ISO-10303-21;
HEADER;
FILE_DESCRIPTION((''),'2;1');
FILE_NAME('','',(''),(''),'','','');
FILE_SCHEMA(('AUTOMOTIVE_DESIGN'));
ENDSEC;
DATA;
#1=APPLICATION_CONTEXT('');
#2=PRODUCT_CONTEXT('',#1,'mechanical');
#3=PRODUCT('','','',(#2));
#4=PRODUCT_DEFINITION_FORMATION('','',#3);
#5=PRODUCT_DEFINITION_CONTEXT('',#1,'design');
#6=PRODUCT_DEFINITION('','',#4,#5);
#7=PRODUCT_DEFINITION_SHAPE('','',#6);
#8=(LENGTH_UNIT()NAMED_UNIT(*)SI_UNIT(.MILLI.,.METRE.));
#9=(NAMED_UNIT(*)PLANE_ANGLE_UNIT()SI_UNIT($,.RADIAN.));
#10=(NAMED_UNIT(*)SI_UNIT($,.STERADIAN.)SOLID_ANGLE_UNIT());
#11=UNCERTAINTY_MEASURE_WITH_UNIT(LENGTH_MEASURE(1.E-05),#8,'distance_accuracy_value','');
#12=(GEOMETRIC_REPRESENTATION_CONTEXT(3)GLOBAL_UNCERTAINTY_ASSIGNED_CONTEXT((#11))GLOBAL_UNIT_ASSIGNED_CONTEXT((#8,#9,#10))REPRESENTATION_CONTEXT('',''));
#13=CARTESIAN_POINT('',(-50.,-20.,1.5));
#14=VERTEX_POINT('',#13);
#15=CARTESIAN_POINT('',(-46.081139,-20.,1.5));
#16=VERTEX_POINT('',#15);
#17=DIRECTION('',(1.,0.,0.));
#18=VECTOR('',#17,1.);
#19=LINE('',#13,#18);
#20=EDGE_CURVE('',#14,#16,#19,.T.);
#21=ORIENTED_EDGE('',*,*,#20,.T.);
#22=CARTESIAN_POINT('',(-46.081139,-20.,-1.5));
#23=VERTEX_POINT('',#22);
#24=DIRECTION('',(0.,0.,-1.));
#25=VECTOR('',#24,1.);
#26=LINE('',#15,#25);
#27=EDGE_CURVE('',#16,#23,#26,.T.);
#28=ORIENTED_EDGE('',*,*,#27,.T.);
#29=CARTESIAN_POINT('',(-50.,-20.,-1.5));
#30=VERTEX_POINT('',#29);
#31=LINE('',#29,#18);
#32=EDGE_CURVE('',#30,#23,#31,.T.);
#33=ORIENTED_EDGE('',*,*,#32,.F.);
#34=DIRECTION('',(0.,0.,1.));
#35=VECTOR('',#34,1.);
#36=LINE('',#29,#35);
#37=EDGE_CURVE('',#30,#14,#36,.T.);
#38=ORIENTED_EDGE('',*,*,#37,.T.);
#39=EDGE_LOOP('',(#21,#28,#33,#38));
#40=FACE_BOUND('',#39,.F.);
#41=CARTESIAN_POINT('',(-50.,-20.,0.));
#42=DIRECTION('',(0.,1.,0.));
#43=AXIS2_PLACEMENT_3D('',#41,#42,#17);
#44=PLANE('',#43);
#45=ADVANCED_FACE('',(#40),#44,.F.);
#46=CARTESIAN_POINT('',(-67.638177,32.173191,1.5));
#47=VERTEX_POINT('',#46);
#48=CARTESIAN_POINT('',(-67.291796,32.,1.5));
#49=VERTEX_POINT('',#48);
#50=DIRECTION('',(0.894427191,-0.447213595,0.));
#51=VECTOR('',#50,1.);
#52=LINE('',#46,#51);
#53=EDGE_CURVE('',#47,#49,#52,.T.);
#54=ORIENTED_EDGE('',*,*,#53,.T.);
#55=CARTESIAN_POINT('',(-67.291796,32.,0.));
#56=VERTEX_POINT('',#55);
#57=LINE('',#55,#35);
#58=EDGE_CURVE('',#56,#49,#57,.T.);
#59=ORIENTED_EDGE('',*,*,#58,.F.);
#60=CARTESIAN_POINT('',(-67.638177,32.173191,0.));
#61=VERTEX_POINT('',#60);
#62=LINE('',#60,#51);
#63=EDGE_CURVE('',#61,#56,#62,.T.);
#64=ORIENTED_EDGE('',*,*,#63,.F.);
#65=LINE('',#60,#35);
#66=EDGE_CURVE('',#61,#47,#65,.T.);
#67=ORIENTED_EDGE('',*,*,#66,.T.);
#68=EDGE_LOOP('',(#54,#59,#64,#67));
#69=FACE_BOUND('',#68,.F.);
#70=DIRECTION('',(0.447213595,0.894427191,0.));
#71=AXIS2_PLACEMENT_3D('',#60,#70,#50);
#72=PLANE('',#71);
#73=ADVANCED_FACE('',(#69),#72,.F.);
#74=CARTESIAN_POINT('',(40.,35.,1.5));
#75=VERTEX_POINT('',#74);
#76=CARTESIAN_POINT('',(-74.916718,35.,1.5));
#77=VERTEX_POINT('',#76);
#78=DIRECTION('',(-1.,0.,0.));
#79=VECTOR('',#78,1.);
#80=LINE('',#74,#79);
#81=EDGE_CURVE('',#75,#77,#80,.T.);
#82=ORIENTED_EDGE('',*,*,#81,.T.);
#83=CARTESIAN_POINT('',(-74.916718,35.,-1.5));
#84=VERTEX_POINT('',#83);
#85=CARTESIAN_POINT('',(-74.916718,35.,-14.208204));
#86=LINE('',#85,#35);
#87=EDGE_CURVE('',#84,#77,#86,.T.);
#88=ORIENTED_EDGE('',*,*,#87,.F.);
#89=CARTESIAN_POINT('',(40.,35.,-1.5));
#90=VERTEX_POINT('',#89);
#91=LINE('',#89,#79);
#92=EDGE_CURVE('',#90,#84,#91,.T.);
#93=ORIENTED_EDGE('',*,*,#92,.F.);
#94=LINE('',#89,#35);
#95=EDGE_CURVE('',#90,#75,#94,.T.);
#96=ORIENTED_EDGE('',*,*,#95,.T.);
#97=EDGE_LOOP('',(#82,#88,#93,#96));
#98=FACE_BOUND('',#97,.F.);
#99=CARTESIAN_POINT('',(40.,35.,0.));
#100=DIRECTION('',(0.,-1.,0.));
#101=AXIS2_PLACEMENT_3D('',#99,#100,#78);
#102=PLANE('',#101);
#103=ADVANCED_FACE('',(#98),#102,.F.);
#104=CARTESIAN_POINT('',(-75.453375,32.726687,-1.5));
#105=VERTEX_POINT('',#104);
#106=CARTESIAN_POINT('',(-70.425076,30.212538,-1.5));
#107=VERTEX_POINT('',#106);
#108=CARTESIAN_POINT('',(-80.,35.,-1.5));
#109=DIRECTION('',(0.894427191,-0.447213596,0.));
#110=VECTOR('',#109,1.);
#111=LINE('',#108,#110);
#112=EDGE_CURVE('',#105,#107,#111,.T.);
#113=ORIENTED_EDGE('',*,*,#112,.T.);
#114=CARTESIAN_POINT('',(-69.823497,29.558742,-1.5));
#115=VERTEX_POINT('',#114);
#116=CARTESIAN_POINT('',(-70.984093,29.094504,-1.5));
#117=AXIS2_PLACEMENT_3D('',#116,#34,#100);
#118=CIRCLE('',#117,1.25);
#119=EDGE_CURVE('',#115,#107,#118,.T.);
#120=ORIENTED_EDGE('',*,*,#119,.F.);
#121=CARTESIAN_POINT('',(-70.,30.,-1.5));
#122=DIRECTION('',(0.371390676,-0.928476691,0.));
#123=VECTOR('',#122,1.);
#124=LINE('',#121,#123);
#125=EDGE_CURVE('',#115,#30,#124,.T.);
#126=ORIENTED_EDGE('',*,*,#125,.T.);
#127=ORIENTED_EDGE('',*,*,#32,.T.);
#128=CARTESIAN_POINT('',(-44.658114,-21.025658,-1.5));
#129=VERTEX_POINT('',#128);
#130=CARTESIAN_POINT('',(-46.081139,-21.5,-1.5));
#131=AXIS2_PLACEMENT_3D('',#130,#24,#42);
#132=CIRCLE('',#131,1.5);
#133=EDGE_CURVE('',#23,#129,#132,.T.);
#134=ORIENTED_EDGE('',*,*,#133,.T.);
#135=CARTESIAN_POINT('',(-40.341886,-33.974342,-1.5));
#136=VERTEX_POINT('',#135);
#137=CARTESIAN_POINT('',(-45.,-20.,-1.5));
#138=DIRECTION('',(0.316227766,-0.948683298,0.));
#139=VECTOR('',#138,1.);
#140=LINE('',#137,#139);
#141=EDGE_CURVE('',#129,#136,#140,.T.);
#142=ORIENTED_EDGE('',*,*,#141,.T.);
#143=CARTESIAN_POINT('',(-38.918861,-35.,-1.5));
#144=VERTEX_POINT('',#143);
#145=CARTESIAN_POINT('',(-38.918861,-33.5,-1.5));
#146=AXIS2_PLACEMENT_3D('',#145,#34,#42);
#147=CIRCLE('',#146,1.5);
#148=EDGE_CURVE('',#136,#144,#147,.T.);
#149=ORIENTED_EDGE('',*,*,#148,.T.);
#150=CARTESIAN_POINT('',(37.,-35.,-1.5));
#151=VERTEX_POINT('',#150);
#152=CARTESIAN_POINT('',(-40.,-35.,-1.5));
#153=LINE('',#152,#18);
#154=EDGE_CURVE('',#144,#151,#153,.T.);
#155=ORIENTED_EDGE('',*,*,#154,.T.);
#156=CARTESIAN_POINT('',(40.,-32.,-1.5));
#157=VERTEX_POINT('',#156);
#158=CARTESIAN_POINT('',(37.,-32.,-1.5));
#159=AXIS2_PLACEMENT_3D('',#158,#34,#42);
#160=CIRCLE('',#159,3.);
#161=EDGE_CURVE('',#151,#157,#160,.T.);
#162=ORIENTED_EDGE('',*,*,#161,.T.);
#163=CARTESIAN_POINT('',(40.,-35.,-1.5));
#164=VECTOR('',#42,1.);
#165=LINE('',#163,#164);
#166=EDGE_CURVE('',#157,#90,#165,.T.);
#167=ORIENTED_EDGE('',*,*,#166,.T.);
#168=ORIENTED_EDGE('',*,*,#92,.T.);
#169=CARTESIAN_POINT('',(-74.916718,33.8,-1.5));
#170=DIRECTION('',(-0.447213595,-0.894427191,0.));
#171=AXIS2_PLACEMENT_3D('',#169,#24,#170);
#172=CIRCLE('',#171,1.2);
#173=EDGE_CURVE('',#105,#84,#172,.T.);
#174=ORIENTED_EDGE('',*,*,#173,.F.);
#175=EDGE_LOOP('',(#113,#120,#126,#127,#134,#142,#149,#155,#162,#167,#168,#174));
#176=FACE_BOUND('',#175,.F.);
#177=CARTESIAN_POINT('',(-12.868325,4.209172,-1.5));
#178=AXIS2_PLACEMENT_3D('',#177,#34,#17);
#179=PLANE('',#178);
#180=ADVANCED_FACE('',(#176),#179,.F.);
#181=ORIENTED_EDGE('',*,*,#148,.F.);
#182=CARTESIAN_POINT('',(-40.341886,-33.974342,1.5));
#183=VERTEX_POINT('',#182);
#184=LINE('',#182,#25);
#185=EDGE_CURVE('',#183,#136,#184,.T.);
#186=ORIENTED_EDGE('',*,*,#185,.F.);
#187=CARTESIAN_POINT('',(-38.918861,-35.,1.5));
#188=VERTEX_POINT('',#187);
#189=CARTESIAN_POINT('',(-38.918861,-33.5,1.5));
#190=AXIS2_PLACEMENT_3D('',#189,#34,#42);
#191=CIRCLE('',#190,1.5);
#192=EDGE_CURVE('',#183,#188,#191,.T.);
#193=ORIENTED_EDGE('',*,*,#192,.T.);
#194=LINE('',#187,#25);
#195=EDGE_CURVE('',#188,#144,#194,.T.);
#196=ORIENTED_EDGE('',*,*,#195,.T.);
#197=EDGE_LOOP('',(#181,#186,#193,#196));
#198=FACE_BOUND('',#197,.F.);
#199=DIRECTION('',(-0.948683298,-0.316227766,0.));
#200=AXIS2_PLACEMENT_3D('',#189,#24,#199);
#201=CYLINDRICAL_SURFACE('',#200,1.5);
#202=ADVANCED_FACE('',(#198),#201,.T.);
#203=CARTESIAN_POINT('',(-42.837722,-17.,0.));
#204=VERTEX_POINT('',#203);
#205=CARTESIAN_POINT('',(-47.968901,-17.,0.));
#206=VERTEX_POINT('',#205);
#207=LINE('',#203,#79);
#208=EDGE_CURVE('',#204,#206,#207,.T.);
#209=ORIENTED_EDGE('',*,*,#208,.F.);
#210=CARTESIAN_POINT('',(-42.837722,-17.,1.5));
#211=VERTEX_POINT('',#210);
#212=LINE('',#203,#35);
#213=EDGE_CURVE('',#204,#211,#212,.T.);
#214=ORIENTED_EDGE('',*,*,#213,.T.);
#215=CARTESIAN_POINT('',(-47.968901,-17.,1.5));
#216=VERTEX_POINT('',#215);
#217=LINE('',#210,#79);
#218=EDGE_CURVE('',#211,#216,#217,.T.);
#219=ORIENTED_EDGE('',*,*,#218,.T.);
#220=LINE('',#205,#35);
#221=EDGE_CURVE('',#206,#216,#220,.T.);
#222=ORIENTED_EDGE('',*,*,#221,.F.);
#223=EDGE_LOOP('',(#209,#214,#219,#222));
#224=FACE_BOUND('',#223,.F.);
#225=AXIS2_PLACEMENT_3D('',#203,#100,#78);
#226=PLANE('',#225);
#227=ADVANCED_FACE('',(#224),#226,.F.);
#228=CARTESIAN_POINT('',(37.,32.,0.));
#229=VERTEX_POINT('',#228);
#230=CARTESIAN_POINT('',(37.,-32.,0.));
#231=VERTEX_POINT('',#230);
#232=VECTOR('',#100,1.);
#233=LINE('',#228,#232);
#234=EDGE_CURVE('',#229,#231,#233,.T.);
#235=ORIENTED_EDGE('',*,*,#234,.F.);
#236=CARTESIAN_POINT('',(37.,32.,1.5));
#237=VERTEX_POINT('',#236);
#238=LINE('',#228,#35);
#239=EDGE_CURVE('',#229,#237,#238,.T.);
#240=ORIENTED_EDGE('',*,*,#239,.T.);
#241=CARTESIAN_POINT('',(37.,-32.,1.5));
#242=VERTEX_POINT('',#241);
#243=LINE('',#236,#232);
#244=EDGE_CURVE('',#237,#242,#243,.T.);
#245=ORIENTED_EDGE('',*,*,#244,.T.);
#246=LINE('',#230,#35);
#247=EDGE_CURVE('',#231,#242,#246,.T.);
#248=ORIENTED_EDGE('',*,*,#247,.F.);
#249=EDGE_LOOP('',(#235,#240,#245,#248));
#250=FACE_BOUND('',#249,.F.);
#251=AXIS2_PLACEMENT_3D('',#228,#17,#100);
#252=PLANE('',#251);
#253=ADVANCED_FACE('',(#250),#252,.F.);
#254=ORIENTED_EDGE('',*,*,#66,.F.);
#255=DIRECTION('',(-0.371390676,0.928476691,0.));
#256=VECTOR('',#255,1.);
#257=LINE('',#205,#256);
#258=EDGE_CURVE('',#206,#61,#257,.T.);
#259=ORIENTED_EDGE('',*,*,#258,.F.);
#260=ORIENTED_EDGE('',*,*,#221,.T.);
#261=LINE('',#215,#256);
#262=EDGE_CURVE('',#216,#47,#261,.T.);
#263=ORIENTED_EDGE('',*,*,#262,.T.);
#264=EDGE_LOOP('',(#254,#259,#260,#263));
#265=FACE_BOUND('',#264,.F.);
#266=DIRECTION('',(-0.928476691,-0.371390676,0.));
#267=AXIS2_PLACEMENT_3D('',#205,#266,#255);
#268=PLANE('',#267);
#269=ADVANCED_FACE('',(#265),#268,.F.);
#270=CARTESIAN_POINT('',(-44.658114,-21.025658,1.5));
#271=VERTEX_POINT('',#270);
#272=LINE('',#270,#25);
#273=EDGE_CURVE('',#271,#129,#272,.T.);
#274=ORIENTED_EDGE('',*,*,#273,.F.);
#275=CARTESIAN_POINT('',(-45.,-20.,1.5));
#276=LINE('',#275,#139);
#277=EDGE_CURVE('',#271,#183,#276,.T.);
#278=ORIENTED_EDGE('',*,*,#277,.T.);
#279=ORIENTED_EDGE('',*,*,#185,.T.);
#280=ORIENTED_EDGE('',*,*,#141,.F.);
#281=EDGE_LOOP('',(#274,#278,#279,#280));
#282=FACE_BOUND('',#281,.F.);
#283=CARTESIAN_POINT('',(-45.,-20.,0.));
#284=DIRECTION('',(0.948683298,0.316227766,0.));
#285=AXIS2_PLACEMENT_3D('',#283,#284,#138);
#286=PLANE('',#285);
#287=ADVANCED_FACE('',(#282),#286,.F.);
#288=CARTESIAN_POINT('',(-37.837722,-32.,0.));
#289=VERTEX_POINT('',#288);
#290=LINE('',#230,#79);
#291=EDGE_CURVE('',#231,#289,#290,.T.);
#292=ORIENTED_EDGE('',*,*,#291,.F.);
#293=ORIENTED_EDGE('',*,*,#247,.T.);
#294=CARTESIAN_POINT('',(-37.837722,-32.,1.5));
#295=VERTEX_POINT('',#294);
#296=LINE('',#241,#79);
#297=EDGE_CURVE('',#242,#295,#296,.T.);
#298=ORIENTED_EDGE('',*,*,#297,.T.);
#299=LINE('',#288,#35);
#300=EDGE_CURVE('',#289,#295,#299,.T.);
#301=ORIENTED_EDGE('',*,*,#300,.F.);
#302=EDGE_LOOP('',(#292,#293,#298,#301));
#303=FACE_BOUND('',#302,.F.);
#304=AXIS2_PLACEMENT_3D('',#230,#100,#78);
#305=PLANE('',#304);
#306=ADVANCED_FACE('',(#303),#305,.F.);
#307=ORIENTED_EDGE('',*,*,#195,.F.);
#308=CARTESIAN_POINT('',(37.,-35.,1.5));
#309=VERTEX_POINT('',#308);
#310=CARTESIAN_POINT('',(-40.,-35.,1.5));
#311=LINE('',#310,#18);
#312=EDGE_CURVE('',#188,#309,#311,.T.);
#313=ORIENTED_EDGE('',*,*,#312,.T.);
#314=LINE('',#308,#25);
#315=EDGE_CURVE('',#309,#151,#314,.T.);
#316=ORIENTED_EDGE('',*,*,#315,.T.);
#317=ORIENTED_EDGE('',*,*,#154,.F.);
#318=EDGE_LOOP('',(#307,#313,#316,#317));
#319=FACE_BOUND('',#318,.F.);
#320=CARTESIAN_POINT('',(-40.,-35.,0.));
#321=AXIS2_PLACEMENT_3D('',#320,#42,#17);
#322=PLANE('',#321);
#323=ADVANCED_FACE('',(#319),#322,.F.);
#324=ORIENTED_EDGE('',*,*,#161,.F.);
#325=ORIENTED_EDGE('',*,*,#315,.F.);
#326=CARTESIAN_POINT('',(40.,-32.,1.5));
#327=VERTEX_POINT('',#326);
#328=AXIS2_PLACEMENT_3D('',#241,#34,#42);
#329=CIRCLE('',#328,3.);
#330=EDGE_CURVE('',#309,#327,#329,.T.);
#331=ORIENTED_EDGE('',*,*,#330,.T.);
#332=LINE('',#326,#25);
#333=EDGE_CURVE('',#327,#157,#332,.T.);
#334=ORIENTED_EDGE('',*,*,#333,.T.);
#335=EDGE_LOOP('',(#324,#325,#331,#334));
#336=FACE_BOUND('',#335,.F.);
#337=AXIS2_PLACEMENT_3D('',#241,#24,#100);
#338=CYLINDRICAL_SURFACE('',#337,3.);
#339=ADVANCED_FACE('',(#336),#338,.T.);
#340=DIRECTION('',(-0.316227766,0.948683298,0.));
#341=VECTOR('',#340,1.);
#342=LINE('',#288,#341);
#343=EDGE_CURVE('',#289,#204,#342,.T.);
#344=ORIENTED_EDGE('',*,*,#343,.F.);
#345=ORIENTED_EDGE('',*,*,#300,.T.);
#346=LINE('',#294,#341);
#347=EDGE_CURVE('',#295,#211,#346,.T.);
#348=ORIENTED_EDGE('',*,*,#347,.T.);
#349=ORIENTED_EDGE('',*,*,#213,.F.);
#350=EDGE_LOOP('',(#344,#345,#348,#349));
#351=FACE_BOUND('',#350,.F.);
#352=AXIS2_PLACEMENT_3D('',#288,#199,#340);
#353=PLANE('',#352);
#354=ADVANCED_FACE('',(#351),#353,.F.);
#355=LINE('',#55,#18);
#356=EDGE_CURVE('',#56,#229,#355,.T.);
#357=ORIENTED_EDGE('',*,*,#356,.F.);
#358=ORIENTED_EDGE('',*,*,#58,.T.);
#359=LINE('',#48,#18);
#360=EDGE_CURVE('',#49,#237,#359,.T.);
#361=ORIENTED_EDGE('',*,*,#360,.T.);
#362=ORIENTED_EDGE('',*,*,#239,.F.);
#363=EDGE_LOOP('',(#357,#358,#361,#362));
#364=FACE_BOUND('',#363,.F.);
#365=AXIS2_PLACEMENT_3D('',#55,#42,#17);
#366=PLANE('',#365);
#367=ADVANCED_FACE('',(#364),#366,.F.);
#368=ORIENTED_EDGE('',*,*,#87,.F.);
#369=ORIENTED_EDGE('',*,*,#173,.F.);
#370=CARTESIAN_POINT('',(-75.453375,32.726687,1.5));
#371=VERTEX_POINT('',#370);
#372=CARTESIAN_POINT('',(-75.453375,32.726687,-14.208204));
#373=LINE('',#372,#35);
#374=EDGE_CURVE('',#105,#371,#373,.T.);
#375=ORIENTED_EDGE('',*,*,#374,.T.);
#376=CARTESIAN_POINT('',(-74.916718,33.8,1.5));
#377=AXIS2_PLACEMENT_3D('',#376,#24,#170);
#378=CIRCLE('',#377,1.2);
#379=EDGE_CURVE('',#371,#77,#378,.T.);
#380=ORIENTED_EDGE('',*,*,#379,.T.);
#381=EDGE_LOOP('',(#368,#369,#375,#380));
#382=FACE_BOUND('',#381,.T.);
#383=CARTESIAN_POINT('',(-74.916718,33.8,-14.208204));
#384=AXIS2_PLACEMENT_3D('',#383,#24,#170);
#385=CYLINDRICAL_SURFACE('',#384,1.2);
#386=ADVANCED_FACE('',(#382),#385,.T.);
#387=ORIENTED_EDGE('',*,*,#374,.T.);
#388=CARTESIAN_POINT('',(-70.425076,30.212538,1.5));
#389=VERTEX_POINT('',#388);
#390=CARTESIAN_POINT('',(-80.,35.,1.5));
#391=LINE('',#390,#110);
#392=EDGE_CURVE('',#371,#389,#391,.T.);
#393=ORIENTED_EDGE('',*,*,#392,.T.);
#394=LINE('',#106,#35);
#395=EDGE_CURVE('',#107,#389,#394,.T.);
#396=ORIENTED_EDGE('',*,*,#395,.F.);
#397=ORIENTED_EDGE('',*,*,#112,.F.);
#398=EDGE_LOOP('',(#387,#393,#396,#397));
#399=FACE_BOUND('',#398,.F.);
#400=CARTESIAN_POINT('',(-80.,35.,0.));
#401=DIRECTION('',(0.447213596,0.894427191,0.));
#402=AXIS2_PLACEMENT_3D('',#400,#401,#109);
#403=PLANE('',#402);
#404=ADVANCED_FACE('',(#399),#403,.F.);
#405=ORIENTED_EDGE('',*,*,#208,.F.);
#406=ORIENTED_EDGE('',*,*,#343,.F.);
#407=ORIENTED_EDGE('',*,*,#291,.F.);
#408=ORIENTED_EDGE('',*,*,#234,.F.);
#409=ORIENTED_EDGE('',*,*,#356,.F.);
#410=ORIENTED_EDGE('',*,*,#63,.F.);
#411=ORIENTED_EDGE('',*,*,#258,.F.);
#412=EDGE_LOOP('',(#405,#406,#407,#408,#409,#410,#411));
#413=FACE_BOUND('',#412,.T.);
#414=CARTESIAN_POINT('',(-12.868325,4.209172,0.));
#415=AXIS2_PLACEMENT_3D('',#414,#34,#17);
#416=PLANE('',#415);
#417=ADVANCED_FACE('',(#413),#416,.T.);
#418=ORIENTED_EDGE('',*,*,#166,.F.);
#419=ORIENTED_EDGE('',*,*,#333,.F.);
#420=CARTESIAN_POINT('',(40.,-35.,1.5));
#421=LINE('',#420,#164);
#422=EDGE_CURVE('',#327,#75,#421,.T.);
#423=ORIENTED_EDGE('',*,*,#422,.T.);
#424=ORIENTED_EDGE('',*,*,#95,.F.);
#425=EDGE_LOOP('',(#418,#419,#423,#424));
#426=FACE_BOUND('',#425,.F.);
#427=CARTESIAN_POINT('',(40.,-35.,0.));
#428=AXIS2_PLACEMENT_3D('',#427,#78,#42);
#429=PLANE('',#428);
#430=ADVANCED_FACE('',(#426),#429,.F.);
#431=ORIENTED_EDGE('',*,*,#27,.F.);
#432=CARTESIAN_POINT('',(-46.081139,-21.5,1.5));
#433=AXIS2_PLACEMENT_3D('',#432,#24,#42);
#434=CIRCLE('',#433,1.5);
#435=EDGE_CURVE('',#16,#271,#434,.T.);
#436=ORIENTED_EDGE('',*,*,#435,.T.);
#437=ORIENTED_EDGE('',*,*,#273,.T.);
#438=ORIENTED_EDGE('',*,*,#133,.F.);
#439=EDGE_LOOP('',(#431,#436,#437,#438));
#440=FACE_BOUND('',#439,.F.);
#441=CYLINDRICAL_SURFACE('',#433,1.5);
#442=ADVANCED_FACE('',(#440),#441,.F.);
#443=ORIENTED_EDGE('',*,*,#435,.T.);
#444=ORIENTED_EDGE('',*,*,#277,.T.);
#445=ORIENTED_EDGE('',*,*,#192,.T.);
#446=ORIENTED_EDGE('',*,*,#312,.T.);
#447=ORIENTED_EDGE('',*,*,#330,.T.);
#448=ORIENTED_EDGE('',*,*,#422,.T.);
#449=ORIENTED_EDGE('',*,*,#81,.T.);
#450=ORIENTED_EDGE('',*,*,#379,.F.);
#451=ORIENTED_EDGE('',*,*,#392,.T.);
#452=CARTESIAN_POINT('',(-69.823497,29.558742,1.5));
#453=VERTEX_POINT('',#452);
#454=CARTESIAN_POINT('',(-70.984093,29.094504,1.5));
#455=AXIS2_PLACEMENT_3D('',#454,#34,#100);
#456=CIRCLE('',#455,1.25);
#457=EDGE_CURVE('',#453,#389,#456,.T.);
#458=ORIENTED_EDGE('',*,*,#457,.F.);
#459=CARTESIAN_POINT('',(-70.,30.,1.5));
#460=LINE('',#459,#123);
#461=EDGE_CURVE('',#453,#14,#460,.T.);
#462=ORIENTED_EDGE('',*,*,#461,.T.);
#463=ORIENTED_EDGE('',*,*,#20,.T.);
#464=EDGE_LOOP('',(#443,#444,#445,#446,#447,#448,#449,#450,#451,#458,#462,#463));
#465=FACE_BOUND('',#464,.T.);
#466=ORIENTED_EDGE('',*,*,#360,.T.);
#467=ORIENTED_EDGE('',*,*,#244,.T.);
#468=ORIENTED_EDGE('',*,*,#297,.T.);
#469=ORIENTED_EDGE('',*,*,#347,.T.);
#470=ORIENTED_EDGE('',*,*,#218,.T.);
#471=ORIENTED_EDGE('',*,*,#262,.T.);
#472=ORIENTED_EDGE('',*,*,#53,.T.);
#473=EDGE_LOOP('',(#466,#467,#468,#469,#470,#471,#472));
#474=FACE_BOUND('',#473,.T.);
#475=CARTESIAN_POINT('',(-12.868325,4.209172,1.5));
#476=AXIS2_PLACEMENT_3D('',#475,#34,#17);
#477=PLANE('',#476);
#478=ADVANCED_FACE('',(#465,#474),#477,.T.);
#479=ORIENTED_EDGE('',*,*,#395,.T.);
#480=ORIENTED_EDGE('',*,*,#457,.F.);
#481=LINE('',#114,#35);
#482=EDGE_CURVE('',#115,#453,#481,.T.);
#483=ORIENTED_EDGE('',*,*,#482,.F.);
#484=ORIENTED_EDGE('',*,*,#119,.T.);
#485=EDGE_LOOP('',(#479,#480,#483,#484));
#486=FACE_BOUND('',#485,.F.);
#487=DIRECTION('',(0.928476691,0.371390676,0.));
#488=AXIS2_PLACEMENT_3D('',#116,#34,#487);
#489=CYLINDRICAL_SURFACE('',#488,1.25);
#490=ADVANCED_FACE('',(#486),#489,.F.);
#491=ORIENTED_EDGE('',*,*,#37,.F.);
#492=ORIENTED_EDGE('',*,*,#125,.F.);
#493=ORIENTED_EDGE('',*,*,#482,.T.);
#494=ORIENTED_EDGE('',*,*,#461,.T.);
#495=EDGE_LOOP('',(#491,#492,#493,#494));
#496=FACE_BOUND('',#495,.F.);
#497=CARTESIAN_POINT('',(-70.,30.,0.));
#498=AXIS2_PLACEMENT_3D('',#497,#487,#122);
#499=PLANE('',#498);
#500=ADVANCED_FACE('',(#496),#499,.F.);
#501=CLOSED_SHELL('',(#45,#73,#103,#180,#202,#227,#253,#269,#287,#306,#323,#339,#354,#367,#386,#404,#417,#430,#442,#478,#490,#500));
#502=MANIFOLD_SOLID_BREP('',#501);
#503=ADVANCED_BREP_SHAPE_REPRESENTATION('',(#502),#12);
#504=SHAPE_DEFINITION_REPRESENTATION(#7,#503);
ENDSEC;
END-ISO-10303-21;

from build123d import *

# Parameters (mm, degrees)
F1_DEPTH    = 1.5
F2_DEPTH    = 1.5
F3_T1_DEPTH = 28.416407865
F4_R        = 1.25
F5_R        = 1.5
F6_R        = 3


# Not quite as in the source:
# - a fillet or chamfer that OpenCascade refuses, or shapes differently, is made with other operations: its cross-section is extruded or revolved along the edge and cut away or added
# - a feature names something its author has since deleted; it is built from what else it names


with BuildPart() as f1:
    # F0 (on Top) → F1 (new body)
    with BuildSketch(Plane.XY):
        Polygon((40, -35), (40, 35), (-40, 35), (-80, 35), (-70, 30), (-50, -20), (-45, -20), (-40, -35), align=None)
        Polygon((-37.8377223398, -32), (-42.8377223398, -17), (-47.9689011157, -17), (-67.6381773778, 32.1731906551), (-67.2917960675, 32), (-40, 32), (37, 32), (37, -32), align=None, mode=Mode.SUBTRACT)
        Polygon((-47.9689011157, -17), (-42.8377223398, -17), (-37.8377223398, -32), (37, -32), (37, 32), (-40, 32), (-67.2917960675, 32), (-67.6381773778, 32.1731906551), align=None)
    extrude(amount=-F1_DEPTH)

    # F0 (on Top) → F2 (join)
    with BuildSketch(Plane.XY):
        Polygon((40, -35), (40, 35), (-40, 35), (-80, 35), (-70, 30), (-50, -20), (-45, -20), (-40, -35), align=None)
        Polygon((-37.8377223398, -32), (-42.8377223398, -17), (-47.9689011157, -17), (-67.6381773778, 32.1731906551), (-67.2917960675, 32), (-40, 32), (37, 32), (37, -32), align=None, mode=Mode.SUBTRACT)
    extrude(amount=F2_DEPTH)

    # F3: fillet of radius 1.2 on 1 edges, made by hand

    # F3_s2 → F3_t1 (cut)
    with BuildSketch(Plane.XY.offset(-14.2082039325)):
        with BuildLine():
            ThreePointArc((-75.4533747416, 32.7266873708), (-76.0846172144, 34.0757035047), (-74.916718427, 35))
            Line((-74.916718427, 35), (-80, 35))
            Line((-80, 35), (-75.4533747416, 32.7266873708))
        make_face()
    extrude(amount=F3_T1_DEPTH, mode=Mode.SUBTRACT)

    # F4
    f4_edges = [f1.edges().sort_by_distance(p)[0] for p in [
        (-70, 30, 0),
    ]]
    fillet(f4_edges, radius=F4_R)

    # F5
    f5_edges = [f1.edges().sort_by_distance(p)[0] for p in [
        (-45, -20, 0),
        (-40, -35, 0),
    ]]
    fillet(f5_edges, radius=F5_R)

    # F6
    f6_edges = [f1.edges().sort_by_distance(p)[0] for p in [
        (40, -35, 0),
    ]]
    fillet(f6_edges, radius=F6_R)


solid = f1.part
